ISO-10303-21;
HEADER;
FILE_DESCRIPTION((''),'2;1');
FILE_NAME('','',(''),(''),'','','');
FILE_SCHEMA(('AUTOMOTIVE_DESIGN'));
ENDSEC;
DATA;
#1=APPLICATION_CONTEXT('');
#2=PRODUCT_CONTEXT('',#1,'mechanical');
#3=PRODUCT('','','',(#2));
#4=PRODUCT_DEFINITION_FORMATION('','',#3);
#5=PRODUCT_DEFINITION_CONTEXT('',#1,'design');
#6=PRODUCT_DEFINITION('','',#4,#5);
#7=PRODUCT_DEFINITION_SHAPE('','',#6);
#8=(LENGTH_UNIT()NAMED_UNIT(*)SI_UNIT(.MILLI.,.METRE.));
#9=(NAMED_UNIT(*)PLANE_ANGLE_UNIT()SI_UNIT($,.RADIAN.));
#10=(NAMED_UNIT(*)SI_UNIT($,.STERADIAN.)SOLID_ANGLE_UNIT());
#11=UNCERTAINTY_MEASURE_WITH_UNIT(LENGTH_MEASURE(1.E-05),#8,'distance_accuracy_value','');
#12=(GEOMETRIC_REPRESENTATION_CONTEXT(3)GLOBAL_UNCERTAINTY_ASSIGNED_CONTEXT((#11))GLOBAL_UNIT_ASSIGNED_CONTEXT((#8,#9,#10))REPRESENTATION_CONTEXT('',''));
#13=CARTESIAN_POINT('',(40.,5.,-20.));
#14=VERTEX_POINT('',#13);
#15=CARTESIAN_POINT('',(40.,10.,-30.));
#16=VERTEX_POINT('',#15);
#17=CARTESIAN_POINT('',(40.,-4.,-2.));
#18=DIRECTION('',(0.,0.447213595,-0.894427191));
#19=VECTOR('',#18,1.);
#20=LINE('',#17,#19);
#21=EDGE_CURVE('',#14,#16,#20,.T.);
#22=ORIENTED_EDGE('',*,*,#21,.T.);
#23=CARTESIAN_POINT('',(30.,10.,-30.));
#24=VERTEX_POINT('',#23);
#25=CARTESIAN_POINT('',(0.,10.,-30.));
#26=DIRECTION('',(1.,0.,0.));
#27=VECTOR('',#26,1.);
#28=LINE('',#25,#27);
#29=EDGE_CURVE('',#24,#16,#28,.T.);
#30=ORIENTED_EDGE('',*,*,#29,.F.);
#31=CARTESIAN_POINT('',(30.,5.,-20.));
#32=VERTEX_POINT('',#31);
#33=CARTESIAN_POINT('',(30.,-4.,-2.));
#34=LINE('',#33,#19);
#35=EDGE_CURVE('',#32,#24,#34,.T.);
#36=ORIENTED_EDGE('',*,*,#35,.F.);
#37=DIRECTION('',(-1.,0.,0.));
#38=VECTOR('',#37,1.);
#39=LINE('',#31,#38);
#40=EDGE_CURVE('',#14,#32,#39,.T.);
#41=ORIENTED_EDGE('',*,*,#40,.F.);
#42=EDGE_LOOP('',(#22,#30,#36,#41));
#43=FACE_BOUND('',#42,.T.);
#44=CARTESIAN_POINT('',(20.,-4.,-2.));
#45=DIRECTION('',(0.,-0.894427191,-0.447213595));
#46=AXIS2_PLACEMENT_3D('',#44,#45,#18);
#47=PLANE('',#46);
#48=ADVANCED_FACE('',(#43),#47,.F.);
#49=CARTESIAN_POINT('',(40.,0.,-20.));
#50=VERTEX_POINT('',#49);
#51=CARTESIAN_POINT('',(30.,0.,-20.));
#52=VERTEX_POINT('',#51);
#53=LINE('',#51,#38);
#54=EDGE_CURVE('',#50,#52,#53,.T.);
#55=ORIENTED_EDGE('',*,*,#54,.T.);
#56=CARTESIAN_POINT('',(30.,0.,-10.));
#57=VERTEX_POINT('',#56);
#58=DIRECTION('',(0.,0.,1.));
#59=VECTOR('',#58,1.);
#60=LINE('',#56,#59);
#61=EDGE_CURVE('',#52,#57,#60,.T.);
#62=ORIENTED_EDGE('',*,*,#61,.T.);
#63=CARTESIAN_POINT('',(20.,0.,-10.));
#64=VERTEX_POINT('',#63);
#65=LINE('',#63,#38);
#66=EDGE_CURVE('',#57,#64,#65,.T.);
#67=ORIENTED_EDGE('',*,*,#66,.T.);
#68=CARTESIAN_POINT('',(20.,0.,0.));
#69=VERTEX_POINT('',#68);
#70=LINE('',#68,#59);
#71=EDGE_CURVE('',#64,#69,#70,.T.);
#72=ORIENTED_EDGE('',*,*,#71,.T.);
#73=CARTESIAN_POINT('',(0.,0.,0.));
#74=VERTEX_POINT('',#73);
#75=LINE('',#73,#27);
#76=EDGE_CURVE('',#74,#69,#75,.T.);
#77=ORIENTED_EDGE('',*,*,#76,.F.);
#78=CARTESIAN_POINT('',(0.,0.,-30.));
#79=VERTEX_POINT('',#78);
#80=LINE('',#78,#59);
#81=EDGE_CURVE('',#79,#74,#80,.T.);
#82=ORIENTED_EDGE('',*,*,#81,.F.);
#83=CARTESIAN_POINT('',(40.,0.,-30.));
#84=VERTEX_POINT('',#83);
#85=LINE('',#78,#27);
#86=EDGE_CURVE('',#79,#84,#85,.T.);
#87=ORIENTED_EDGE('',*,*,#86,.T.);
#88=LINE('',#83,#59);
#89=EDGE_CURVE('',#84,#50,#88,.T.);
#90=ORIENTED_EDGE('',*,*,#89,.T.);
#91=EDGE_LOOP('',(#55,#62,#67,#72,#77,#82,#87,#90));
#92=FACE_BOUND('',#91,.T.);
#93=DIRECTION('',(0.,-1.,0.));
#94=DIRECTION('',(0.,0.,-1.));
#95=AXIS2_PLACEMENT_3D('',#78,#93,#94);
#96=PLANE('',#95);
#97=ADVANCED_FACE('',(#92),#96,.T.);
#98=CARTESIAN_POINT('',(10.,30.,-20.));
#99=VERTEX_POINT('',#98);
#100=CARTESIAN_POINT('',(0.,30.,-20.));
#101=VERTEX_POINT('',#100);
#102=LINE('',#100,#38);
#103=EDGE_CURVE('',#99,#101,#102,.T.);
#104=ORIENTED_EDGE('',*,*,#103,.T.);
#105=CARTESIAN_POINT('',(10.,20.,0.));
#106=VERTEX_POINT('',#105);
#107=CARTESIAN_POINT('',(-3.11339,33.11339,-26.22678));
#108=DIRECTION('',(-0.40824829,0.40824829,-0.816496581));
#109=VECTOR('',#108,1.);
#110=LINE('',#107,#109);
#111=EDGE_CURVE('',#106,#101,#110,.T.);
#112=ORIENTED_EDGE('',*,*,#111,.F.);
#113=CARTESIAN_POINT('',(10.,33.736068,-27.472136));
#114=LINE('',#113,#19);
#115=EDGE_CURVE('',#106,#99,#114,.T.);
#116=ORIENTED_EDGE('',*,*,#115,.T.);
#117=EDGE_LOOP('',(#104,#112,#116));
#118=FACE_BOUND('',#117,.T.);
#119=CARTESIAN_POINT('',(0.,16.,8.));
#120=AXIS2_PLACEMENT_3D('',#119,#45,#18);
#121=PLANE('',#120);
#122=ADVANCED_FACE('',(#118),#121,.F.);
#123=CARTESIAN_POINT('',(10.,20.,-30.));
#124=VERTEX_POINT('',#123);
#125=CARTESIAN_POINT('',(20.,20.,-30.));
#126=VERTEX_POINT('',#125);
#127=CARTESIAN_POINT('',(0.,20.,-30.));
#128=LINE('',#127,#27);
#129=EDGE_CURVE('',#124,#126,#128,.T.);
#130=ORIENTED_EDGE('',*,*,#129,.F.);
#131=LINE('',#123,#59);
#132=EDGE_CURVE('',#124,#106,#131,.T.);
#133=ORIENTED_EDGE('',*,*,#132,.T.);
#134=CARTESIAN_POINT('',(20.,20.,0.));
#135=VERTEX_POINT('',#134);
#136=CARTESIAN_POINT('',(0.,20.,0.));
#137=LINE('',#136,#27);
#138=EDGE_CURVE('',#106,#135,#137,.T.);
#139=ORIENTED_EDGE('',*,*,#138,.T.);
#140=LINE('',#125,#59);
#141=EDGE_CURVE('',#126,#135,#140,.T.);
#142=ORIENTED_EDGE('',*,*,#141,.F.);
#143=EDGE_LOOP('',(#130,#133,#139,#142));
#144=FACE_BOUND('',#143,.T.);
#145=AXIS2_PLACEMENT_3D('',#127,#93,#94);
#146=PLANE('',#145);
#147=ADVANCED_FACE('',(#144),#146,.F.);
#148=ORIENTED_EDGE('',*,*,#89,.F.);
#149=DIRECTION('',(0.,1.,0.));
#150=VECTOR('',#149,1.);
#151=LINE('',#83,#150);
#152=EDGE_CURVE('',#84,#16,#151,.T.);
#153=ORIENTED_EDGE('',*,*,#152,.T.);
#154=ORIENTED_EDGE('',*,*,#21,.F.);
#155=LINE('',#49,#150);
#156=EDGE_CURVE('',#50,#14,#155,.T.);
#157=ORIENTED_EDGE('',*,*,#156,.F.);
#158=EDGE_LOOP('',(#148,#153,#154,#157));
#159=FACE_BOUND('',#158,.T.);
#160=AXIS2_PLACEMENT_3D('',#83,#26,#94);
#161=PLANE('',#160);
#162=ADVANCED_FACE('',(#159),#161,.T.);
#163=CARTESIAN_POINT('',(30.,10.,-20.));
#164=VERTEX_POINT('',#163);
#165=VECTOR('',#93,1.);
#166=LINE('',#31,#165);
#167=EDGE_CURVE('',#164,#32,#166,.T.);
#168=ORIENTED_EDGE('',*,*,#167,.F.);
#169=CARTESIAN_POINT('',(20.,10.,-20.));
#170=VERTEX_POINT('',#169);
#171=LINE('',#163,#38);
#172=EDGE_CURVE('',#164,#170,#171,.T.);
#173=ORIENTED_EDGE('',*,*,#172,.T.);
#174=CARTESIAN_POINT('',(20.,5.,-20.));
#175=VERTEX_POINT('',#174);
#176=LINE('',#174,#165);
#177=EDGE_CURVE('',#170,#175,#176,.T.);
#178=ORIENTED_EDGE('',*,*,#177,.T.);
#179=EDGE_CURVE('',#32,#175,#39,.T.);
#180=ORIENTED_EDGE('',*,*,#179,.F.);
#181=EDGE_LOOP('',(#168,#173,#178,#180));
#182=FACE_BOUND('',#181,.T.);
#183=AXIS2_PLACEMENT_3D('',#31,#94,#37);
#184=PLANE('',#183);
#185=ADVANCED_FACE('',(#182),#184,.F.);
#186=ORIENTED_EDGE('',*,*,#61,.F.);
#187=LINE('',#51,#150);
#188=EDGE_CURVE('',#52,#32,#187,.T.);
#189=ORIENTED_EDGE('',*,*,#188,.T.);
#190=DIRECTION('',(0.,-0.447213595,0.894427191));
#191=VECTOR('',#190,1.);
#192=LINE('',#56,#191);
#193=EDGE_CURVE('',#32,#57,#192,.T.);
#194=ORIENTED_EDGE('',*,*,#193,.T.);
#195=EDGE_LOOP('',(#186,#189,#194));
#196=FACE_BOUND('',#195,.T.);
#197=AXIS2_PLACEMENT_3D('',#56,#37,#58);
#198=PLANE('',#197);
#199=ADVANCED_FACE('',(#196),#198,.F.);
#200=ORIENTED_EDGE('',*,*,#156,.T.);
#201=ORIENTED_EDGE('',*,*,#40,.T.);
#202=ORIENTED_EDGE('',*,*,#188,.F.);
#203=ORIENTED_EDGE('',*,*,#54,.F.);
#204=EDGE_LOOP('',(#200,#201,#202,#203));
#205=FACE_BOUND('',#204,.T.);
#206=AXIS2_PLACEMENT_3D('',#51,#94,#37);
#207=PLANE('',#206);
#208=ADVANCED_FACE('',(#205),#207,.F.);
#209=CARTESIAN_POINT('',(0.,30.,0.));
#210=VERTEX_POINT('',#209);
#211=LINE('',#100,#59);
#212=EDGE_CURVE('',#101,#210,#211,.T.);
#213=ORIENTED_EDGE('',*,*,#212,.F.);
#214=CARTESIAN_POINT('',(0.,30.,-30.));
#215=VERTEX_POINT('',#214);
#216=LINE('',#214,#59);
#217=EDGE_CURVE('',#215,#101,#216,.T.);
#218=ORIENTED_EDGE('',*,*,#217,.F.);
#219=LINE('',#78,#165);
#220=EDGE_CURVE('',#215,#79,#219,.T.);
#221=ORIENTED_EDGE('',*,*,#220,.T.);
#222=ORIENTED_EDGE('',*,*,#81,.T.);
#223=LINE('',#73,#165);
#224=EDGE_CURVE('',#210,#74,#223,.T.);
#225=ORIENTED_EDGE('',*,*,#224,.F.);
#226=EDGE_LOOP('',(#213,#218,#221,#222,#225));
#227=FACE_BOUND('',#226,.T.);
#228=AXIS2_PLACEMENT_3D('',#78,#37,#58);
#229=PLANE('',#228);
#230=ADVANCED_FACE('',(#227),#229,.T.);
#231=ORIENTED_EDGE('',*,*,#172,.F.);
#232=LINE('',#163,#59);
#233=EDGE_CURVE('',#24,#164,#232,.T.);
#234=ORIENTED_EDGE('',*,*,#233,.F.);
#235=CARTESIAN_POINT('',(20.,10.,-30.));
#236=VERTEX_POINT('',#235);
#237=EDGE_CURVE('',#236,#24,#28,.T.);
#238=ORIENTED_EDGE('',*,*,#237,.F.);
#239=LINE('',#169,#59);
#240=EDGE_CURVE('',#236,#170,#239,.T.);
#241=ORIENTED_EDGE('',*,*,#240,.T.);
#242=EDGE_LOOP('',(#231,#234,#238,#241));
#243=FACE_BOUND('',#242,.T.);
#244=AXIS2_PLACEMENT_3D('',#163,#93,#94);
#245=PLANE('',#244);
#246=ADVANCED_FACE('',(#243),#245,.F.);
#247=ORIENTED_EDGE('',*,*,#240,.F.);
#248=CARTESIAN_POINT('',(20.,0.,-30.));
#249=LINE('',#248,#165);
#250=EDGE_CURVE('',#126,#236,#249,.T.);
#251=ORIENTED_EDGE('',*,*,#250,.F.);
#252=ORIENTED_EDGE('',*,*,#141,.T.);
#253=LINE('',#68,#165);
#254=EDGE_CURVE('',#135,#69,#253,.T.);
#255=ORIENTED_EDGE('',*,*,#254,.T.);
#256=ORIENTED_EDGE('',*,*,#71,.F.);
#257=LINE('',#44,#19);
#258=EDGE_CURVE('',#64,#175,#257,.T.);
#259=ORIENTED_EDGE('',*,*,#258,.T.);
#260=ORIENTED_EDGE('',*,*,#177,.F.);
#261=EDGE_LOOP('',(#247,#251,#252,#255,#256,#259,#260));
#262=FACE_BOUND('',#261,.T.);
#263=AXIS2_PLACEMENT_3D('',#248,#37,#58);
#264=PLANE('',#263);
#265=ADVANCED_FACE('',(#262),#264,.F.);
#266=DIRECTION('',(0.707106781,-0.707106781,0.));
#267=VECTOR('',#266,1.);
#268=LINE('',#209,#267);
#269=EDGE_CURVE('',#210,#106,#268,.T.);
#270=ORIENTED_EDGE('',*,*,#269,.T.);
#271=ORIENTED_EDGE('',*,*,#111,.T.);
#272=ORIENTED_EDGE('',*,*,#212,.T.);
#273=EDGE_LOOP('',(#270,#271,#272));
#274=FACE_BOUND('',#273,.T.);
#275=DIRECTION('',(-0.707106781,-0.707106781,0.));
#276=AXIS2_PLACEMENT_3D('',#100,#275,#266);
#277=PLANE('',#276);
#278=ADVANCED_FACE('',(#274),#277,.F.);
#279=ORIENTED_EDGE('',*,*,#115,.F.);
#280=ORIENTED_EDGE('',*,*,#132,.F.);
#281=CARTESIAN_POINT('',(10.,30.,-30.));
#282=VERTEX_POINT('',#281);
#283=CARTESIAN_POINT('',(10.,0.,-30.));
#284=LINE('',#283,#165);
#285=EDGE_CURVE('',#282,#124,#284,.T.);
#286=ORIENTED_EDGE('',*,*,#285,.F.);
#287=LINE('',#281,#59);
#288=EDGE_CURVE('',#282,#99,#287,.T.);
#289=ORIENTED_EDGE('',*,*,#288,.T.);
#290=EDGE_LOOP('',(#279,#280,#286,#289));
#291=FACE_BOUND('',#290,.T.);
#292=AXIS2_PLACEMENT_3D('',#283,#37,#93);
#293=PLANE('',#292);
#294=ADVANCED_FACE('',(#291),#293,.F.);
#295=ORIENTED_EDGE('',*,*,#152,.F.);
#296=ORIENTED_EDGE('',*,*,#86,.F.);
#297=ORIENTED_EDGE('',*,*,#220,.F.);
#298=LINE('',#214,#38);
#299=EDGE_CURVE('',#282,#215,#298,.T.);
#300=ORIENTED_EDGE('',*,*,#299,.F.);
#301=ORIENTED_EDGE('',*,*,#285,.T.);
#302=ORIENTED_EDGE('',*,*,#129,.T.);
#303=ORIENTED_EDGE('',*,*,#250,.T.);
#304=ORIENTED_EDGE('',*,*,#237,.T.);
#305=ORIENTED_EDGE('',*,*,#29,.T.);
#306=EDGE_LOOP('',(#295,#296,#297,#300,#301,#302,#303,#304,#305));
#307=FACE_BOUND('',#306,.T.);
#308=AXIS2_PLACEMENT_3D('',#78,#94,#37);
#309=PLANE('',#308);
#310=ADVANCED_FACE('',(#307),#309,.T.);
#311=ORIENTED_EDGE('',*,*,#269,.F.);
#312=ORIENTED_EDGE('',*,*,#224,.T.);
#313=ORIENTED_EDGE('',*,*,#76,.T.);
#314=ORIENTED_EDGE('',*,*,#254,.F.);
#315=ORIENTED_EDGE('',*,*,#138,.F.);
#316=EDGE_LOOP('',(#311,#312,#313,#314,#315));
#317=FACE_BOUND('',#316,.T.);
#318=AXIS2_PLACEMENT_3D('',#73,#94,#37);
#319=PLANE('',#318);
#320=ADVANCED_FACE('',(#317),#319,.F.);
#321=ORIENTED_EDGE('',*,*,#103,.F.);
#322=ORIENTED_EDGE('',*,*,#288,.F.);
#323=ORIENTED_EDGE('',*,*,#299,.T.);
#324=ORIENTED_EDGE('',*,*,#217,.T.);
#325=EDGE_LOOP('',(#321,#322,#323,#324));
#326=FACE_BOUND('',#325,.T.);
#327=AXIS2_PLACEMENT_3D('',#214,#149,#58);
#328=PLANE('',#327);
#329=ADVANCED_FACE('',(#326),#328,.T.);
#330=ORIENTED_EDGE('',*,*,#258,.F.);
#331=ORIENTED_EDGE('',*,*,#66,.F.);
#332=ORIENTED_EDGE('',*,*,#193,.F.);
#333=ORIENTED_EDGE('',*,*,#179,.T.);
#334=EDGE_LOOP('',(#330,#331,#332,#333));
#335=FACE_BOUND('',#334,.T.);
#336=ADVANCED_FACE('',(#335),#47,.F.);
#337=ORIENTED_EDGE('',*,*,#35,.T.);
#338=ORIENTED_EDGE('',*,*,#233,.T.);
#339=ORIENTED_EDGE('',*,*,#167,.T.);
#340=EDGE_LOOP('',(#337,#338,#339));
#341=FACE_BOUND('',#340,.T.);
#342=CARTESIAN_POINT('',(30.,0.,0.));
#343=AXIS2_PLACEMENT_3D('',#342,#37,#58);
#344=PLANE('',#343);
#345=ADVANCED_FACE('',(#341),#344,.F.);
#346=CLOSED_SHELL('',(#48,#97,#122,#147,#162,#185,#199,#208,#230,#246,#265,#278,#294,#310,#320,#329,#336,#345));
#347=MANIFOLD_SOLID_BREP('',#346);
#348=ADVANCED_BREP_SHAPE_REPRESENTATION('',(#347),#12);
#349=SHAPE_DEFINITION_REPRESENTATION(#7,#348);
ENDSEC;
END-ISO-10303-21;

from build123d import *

# Parameters (mm, degrees)
SKETCH_1_W           = 40
SKETCH_1_H           = 30
EXTRUDE_1_DEPTH      = 30
SKETCH_46_W          = 20
SKETCH_46_H          = 10
CUT_EXTRUDE_32_DEPTH = 59.309518948
CUT_EXTRUDE_33_DEPTH = 59.309518948
CUT_EXTRUDE_34_DEPTH = 20
EXTRUDE_2_DEPTH      = 10
CUT_EXTRUDE_35_DEPTH = 20
SKETCH_54_W          = 10
SKETCH_54_H          = 5
EXTRUDE_3_DEPTH      = 10


with BuildPart() as part:
    # 草圖1 → 填料-伸1 (new body)
    with BuildSketch(Plane.XY):
        with Locations((20, 15)):
            Rectangle(SKETCH_1_W, SKETCH_1_H)
    extrude(amount=-EXTRUDE_1_DEPTH)

    # 草圖46 → 除料-伸長32 (cut, through all)
    with BuildSketch(Plane.XY):
        Polygon((40, 30), (10, 30), (10, 20), (20, 20), (40, 20), align=None)
        with Locations((30, 15)):
            Rectangle(SKETCH_46_W, SKETCH_46_H)
    extrude(amount=-CUT_EXTRUDE_32_DEPTH, mode=Mode.SUBTRACT)

    # 草圖47 → 除料-伸長33 (cut, through all)
    with BuildSketch(Plane(origin=(0, 30, 0), x_dir=(1, 0, 0), z_dir=(0, 1, 0))):
        Polygon((20, 0), (20, 10), (30, 10), (30, 20), (40, 20), (40, 0), align=None)
    extrude(amount=-CUT_EXTRUDE_33_DEPTH, mode=Mode.SUBTRACT)

    # 草圖48 → 除料-伸長34 (cut)
    with BuildSketch(Plane.XY):
        Polygon((0, 30), (10, 20), (10, 30), align=None)
    extrude(amount=-CUT_EXTRUDE_34_DEPTH, mode=Mode.SUBTRACT)

    # 填料-伸長2: read off the stored shape, not the designer's step
    # 填料-伸長2 outline → 填料-伸長2 (add)
    with BuildSketch(Plane.YZ):
        Polygon((20, -30), (30, -30), (30, -20), (20, 0), align=None)
    extrude(amount=EXTRUDE_2_DEPTH)

    # 草圖52 → 除料-伸長35 (cut)
    with BuildSketch(Plane(origin=(40, 0, 0), x_dir=(0, 0, -1), z_dir=(1, 0, 0))):
        Polygon((20, 10), (20, 5), (30, 10), align=None)
        Polygon((10, 10), (10, 0), (20, 5), (20, 10), align=None)
    extrude(amount=-CUT_EXTRUDE_35_DEPTH, mode=Mode.SUBTRACT)

    # 草圖54 → 填料-伸長3 (add)
    with BuildSketch(Plane(origin=(20, 0, 0), x_dir=(0, 0, -1), z_dir=(1, 0, 0))):
        with Locations((25, 7.5)):
            Rectangle(SKETCH_54_W, SKETCH_54_H)
    extrude(amount=EXTRUDE_3_DEPTH)


solid = part.part
